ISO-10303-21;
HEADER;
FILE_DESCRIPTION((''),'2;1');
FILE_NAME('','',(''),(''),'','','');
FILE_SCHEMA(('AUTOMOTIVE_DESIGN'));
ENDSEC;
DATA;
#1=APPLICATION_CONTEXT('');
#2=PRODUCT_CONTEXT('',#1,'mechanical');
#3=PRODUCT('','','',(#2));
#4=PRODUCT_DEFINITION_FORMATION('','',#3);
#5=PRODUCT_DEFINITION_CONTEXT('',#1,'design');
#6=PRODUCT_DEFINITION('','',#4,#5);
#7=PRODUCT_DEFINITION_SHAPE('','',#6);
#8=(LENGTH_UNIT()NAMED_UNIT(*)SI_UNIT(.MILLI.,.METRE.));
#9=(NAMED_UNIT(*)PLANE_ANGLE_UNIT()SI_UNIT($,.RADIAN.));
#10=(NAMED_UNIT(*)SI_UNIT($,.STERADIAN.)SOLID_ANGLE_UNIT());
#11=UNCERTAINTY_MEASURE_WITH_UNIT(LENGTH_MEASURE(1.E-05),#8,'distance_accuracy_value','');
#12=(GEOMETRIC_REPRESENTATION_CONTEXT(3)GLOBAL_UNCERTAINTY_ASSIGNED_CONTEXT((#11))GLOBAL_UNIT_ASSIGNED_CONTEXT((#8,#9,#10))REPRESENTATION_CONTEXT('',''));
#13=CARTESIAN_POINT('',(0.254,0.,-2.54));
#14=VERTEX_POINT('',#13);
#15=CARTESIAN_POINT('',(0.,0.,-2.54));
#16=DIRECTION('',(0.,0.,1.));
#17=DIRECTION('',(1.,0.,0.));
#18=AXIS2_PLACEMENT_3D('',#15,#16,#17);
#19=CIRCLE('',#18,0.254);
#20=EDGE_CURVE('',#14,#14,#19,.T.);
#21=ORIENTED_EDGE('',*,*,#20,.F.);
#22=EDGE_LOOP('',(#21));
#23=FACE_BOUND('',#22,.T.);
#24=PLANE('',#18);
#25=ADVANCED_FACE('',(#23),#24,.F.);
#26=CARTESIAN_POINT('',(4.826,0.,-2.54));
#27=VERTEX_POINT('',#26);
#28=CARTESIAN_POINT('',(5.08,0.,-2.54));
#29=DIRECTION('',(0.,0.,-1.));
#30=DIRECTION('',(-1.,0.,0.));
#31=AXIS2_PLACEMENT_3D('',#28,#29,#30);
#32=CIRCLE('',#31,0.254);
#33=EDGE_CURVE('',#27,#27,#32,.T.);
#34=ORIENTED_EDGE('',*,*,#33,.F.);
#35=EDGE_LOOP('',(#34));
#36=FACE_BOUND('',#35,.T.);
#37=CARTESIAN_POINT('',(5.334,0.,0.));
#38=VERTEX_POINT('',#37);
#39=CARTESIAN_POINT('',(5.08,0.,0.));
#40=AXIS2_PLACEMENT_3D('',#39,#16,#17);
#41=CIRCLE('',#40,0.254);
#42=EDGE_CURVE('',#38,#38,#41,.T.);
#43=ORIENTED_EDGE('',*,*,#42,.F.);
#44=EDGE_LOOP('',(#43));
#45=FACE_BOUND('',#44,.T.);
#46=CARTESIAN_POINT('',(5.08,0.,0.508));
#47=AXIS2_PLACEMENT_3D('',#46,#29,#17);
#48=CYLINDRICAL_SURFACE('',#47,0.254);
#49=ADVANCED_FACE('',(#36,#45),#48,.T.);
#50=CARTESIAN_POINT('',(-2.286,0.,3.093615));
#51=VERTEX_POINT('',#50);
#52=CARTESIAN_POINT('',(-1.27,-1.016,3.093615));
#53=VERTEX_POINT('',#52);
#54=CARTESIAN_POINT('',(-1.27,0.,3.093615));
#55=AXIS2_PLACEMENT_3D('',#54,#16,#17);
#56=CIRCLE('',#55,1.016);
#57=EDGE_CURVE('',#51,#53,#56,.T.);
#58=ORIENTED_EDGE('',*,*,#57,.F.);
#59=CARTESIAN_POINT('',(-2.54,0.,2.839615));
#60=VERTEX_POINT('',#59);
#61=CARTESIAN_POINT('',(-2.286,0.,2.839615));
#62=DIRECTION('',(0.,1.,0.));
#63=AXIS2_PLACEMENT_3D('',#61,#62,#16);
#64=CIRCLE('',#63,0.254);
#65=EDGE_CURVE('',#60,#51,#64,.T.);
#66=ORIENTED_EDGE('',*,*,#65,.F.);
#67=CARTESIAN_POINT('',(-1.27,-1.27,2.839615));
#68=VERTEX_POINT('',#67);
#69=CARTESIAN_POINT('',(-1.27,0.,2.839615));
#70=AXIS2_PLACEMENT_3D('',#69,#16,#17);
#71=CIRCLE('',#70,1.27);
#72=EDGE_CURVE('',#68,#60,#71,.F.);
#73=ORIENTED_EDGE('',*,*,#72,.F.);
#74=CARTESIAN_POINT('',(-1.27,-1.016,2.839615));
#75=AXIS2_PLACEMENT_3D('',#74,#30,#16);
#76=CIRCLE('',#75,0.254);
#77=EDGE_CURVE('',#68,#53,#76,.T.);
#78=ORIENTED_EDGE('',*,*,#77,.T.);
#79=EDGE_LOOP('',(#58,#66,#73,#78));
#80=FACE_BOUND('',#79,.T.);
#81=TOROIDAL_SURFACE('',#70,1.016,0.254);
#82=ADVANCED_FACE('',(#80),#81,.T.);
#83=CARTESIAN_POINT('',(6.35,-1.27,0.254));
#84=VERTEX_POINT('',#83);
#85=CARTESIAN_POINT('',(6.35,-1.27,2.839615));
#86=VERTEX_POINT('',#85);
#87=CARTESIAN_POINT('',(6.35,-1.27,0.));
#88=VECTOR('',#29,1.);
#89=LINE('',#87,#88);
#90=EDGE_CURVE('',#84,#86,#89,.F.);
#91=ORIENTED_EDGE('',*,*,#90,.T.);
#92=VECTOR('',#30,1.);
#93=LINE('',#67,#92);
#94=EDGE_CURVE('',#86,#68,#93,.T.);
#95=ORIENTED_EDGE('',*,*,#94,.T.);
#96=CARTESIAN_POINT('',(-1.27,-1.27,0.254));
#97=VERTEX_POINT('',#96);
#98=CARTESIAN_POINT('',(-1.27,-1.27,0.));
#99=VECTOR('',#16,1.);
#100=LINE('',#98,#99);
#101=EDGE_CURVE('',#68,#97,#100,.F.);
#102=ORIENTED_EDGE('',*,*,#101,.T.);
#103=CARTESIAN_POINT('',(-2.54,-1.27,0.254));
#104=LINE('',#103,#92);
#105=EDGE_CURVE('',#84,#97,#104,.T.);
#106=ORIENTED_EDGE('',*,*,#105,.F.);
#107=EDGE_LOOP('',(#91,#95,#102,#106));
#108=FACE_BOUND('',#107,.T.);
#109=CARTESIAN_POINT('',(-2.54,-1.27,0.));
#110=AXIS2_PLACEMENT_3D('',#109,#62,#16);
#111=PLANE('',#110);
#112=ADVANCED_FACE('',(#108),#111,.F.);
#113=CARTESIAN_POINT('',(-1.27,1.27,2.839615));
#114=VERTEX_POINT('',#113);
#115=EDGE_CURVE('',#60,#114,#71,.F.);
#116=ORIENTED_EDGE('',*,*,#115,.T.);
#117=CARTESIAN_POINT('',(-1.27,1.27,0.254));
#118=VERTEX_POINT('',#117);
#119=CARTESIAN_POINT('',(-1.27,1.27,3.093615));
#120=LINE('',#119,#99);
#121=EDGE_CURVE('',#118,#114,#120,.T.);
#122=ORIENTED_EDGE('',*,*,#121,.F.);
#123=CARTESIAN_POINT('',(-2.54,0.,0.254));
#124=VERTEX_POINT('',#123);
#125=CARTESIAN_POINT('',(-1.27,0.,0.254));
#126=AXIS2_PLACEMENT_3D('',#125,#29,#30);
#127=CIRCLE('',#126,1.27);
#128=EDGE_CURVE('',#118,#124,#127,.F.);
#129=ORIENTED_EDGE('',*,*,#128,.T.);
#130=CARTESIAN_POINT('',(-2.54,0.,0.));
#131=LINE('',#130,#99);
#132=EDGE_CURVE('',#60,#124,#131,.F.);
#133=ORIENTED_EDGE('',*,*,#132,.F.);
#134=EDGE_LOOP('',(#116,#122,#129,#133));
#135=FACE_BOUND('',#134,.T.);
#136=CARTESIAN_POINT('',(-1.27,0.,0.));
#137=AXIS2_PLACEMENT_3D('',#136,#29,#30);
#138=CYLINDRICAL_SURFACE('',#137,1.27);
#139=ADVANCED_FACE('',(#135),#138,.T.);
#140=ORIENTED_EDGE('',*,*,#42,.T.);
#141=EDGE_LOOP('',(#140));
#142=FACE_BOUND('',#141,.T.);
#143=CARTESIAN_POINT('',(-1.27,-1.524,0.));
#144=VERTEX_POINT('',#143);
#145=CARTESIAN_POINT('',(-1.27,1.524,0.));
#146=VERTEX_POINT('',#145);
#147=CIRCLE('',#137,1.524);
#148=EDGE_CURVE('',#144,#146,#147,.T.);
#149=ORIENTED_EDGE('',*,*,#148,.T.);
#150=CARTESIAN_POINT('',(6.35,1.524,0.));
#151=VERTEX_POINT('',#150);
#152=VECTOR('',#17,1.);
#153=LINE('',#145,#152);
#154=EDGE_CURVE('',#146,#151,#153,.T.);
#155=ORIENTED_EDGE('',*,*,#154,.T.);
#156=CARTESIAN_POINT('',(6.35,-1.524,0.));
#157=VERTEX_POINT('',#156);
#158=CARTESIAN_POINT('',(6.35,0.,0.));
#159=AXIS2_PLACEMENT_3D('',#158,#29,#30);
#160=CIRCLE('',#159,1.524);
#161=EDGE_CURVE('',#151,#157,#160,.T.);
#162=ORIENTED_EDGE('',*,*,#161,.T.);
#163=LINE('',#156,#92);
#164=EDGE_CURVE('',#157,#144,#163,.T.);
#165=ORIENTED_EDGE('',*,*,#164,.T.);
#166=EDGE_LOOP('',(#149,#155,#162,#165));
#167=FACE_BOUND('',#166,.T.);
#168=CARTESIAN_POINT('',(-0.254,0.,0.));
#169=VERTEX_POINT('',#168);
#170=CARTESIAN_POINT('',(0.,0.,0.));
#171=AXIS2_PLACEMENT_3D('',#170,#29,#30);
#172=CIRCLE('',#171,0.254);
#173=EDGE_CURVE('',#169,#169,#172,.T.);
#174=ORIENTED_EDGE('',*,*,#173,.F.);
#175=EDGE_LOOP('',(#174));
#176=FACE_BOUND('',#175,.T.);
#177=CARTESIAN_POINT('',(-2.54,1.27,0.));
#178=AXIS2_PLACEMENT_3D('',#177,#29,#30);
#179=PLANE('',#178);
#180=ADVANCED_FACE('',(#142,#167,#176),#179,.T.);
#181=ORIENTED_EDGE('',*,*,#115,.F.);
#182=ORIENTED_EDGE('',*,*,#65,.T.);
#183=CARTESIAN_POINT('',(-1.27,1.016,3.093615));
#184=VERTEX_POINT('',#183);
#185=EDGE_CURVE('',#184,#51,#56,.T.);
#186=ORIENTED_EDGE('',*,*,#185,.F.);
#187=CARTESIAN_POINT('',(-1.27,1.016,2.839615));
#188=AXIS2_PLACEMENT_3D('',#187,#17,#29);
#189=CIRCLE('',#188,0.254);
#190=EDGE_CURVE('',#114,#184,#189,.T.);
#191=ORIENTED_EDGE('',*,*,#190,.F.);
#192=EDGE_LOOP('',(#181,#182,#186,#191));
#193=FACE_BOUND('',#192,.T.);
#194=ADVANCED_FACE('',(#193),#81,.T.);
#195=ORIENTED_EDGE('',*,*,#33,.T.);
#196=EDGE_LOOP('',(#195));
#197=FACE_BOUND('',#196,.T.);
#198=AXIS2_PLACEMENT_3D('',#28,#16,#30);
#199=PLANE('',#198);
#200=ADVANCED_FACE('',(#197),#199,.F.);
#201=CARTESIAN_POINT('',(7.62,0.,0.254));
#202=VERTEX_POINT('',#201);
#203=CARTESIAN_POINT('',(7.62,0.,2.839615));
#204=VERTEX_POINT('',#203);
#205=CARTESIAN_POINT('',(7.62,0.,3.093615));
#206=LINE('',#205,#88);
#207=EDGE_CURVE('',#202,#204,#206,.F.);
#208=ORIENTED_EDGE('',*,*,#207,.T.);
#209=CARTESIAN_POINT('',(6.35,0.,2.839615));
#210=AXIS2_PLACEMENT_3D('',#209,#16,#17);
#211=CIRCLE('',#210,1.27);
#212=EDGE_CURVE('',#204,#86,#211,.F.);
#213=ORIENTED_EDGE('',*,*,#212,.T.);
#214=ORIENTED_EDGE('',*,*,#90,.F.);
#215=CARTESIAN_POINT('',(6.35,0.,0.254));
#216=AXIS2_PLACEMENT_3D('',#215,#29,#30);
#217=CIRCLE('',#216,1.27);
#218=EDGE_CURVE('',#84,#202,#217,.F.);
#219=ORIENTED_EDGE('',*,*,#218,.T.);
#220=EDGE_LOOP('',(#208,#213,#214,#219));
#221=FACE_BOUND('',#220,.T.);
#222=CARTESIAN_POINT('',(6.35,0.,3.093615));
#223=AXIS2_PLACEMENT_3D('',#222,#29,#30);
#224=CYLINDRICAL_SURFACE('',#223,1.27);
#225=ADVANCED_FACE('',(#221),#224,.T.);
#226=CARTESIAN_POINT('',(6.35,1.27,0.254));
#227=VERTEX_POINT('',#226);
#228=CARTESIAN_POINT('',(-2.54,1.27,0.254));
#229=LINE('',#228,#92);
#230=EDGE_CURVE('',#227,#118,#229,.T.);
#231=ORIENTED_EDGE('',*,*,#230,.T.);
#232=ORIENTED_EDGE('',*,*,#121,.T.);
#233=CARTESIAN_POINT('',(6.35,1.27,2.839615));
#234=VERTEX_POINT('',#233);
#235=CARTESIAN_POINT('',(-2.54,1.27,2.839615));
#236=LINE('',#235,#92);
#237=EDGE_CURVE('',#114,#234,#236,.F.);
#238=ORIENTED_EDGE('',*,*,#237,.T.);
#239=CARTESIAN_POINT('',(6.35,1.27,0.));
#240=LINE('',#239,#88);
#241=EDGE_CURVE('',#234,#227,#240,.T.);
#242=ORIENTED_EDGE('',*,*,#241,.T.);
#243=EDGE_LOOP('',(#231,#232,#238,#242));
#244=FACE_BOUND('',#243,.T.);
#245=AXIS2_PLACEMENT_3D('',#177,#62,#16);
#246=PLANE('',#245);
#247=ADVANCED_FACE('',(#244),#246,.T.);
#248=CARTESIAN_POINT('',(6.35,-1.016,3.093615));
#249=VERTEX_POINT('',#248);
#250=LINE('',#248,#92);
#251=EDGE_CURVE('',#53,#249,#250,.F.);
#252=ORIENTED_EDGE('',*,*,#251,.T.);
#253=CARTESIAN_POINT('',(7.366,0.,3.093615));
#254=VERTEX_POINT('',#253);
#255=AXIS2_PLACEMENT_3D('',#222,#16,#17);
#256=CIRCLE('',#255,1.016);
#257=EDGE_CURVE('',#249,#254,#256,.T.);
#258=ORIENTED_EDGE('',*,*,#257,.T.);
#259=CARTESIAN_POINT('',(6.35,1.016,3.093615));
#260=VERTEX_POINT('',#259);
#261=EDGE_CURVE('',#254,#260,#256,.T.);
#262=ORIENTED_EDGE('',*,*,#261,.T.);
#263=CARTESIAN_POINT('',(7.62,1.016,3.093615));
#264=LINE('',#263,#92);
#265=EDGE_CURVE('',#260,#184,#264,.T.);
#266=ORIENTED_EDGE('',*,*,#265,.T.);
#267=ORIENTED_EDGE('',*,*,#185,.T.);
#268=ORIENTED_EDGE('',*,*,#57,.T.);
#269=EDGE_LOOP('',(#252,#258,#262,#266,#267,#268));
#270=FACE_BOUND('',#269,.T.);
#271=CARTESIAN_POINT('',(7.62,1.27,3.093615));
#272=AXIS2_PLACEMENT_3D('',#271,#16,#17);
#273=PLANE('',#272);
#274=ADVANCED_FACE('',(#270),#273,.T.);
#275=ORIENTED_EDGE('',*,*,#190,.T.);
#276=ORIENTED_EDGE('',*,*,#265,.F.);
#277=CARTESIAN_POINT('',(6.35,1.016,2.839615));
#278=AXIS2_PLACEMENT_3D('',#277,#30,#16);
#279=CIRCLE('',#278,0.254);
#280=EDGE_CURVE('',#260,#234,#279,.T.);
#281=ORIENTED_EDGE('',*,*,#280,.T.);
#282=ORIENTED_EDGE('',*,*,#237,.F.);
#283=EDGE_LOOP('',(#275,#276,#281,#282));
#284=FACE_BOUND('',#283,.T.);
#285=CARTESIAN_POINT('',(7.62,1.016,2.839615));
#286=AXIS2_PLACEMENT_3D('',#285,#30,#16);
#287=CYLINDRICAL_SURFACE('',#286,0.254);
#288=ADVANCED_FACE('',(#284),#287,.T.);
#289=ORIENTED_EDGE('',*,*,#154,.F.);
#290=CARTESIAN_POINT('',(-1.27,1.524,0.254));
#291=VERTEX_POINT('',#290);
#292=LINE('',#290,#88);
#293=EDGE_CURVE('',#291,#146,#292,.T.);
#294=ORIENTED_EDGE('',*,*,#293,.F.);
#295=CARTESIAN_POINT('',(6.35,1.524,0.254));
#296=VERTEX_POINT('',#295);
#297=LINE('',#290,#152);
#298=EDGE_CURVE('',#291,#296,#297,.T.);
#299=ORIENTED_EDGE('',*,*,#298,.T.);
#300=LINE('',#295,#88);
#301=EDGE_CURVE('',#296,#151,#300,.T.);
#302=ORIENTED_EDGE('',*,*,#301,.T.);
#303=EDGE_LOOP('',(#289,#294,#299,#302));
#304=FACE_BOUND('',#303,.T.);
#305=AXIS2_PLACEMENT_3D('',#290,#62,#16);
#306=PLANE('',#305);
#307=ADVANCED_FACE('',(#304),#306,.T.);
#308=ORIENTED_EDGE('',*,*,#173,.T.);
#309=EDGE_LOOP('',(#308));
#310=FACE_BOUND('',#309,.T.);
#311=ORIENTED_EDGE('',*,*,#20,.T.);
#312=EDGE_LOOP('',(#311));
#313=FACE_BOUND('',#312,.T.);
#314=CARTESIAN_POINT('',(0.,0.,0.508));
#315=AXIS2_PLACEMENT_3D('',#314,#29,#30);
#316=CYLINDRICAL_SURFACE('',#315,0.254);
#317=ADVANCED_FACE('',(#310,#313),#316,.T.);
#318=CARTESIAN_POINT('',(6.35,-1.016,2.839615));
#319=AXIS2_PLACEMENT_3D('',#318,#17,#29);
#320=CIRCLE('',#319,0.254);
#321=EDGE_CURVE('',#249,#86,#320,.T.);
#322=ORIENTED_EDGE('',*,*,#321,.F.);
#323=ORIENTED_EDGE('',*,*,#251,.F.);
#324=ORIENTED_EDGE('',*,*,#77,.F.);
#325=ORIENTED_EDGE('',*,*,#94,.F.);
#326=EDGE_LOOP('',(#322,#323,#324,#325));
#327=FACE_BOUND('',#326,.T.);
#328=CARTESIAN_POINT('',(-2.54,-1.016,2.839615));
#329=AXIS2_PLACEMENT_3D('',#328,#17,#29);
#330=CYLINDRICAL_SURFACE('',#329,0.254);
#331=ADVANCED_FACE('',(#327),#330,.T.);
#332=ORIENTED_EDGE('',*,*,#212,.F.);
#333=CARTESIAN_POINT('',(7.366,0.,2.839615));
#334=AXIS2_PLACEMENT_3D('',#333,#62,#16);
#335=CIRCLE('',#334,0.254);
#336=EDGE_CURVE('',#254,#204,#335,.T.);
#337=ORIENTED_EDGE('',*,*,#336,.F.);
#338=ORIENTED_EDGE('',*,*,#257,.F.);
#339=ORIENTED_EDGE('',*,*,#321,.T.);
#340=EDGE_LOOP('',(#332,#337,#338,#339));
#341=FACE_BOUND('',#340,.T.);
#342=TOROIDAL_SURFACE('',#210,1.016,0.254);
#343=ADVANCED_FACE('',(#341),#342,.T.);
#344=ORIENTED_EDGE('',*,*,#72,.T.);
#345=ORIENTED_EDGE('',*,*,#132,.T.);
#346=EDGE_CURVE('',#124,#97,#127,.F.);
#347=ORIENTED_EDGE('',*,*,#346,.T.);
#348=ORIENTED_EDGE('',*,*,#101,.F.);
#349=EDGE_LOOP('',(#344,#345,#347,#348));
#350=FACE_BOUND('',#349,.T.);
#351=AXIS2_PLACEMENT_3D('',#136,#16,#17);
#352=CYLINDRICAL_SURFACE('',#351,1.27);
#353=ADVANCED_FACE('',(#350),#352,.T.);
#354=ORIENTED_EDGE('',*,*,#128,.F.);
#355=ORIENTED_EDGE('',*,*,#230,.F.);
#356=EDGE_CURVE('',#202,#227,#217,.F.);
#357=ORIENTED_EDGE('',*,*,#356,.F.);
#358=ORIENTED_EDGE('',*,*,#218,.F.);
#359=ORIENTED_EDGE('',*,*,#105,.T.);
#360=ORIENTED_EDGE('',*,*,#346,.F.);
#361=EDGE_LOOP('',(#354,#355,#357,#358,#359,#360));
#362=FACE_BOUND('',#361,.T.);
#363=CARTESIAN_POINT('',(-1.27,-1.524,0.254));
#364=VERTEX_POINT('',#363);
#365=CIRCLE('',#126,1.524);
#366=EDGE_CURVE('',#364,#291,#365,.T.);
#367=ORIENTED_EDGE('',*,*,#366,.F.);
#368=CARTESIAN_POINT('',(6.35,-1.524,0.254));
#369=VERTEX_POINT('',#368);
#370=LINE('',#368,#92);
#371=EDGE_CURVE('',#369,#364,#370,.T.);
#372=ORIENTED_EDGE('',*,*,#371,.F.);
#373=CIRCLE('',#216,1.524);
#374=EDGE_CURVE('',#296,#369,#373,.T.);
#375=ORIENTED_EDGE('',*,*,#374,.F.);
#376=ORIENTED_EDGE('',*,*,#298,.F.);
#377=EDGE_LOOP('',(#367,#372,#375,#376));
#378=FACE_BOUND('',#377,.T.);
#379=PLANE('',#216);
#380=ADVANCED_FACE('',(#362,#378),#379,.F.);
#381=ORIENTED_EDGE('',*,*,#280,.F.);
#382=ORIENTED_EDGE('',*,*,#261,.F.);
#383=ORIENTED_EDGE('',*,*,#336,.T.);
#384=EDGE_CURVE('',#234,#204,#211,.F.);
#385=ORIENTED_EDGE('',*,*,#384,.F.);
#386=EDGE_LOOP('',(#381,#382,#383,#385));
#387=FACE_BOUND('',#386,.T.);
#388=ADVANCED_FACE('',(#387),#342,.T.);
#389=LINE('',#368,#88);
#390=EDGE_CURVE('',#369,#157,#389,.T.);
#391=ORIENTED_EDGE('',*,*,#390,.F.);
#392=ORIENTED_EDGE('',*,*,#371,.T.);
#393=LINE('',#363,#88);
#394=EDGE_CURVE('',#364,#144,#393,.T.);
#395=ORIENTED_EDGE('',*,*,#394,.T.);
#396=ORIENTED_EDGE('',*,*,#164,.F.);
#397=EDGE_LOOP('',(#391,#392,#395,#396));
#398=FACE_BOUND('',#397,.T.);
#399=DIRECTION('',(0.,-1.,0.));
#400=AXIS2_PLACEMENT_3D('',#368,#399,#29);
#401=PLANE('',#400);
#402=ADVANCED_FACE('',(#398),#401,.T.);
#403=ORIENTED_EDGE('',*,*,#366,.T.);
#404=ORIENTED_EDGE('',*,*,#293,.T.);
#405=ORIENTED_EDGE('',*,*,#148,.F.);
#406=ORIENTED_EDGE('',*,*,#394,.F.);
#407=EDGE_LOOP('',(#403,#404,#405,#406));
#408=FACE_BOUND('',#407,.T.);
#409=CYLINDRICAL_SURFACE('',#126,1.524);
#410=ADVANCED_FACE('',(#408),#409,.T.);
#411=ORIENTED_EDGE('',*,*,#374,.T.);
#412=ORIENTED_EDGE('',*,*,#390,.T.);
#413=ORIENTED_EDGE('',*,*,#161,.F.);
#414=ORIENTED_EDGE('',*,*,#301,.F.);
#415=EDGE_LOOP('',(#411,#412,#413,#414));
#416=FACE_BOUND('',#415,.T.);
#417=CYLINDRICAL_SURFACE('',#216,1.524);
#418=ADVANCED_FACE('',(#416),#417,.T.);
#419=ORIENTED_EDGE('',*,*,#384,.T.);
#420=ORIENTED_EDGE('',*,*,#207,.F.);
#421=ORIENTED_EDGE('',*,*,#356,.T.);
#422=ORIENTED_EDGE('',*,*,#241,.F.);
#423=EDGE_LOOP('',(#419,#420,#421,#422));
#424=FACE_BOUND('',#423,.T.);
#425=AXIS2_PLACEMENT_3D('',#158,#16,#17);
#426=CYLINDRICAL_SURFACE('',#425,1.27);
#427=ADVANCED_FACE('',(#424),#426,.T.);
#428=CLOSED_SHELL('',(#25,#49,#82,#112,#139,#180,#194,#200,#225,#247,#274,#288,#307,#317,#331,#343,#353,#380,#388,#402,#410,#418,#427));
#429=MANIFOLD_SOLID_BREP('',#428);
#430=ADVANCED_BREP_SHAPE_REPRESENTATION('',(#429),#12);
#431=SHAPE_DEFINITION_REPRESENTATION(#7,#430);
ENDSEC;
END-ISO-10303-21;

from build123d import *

# Parameters (mm, degrees)
SKETCH2_R           = 0.254
SKETCH4_W           = 10.16
SKETCH4_H           = 3.093614779
BOSS_EXTRUDE1_DEPTH = 1.27
FILLET1_R           = 1.27
FILLET2_R           = 0.254
BOSS_EXTRUDE2_DEPTH = 0.254


with BuildPart() as part:
    # Base-Sweep: sweep along a path in Sketch1
    with BuildLine(Plane(origin=(0, 0, 0), x_dir=(1, 0, 0), z_dir=(0, 1, 0))) as base_sweep_path:
        Line((0, 2.54), (0, -0.508))
    # Sketch2 → Base-Sweep (sweep)
    with BuildSketch(Plane.XY.offset(-2.54)):
        Circle(SKETCH2_R)
    base_sweep = sweep(path=base_sweep_path.line)

    # Sketch4 → Boss-Extrude1 (add, symmetric)
    with BuildSketch(Plane(origin=(0, 0, 0), x_dir=(1, 0, 0), z_dir=(0, 1, 0))):
        with Locations((2.54, -1.54680739)):
            Rectangle(SKETCH4_W, SKETCH4_H)
    extrude(amount=BOSS_EXTRUDE1_DEPTH, both=True)

    # Fillet1
    fillet1_edges = [part.edges().sort_by_distance(p)[0] for p in [
        (-2.54, -1.27, 1.546807389),
        (7.62, -1.27, 1.546807389),
        (-2.54, 1.27, 1.546807389),
        (7.62, 1.27, 1.546807389),
    ]]
    fillet(fillet1_edges, radius=FILLET1_R - 0.0001)  # a hair under: the kernel refuses the full size

    # Fillet2
    fillet2_edges = [part.edges().sort_by_distance(p)[0] for p in [
        (2.54, -1.27, 3.093614779),
        (2.54, 1.27, 3.093614779),
        (7.248054901, 0.898054901, 3.093614779),
        (7.248054901, -0.898054901, 3.093614779),
        (-2.168054901, 0.898054901, 3.093614779),
        (-2.168054901, -0.898054901, 3.093614779),
    ]]
    fillet(fillet2_edges, radius=FILLET2_R)

    # Mirror5: Base-Sweep across plane
    add(base_sweep.mirror(Plane(origin=(2.54, 0, 0), x_dir=(0, 0, 1), z_dir=(1, 0, 0))))

    # Sketch6 → Boss-Extrude2 (add)
    with BuildSketch(Plane(origin=(0, 0, 0), x_dir=(-1, 0, 0), z_dir=(0, 0, -1))):
        with BuildLine():
            Line((-6.35, -1.524), (1.27, -1.524))
            ThreePointArc((1.27, -1.524), (2.347630735, -1.077630735), (2.794, 0))
            ThreePointArc((2.794, 0), (2.347630735, 1.077630735), (1.27, 1.524))
            Line((1.27, 1.524), (-6.35, 1.524))
            ThreePointArc((-6.35, 1.524), (-7.427630735, 1.077630735), (-7.874, 0))
            ThreePointArc((-7.874, 0), (-7.427630735, -1.077630735), (-6.35, -1.524))
        make_face()
    extrude(amount=-BOSS_EXTRUDE2_DEPTH)


solid = part.part
